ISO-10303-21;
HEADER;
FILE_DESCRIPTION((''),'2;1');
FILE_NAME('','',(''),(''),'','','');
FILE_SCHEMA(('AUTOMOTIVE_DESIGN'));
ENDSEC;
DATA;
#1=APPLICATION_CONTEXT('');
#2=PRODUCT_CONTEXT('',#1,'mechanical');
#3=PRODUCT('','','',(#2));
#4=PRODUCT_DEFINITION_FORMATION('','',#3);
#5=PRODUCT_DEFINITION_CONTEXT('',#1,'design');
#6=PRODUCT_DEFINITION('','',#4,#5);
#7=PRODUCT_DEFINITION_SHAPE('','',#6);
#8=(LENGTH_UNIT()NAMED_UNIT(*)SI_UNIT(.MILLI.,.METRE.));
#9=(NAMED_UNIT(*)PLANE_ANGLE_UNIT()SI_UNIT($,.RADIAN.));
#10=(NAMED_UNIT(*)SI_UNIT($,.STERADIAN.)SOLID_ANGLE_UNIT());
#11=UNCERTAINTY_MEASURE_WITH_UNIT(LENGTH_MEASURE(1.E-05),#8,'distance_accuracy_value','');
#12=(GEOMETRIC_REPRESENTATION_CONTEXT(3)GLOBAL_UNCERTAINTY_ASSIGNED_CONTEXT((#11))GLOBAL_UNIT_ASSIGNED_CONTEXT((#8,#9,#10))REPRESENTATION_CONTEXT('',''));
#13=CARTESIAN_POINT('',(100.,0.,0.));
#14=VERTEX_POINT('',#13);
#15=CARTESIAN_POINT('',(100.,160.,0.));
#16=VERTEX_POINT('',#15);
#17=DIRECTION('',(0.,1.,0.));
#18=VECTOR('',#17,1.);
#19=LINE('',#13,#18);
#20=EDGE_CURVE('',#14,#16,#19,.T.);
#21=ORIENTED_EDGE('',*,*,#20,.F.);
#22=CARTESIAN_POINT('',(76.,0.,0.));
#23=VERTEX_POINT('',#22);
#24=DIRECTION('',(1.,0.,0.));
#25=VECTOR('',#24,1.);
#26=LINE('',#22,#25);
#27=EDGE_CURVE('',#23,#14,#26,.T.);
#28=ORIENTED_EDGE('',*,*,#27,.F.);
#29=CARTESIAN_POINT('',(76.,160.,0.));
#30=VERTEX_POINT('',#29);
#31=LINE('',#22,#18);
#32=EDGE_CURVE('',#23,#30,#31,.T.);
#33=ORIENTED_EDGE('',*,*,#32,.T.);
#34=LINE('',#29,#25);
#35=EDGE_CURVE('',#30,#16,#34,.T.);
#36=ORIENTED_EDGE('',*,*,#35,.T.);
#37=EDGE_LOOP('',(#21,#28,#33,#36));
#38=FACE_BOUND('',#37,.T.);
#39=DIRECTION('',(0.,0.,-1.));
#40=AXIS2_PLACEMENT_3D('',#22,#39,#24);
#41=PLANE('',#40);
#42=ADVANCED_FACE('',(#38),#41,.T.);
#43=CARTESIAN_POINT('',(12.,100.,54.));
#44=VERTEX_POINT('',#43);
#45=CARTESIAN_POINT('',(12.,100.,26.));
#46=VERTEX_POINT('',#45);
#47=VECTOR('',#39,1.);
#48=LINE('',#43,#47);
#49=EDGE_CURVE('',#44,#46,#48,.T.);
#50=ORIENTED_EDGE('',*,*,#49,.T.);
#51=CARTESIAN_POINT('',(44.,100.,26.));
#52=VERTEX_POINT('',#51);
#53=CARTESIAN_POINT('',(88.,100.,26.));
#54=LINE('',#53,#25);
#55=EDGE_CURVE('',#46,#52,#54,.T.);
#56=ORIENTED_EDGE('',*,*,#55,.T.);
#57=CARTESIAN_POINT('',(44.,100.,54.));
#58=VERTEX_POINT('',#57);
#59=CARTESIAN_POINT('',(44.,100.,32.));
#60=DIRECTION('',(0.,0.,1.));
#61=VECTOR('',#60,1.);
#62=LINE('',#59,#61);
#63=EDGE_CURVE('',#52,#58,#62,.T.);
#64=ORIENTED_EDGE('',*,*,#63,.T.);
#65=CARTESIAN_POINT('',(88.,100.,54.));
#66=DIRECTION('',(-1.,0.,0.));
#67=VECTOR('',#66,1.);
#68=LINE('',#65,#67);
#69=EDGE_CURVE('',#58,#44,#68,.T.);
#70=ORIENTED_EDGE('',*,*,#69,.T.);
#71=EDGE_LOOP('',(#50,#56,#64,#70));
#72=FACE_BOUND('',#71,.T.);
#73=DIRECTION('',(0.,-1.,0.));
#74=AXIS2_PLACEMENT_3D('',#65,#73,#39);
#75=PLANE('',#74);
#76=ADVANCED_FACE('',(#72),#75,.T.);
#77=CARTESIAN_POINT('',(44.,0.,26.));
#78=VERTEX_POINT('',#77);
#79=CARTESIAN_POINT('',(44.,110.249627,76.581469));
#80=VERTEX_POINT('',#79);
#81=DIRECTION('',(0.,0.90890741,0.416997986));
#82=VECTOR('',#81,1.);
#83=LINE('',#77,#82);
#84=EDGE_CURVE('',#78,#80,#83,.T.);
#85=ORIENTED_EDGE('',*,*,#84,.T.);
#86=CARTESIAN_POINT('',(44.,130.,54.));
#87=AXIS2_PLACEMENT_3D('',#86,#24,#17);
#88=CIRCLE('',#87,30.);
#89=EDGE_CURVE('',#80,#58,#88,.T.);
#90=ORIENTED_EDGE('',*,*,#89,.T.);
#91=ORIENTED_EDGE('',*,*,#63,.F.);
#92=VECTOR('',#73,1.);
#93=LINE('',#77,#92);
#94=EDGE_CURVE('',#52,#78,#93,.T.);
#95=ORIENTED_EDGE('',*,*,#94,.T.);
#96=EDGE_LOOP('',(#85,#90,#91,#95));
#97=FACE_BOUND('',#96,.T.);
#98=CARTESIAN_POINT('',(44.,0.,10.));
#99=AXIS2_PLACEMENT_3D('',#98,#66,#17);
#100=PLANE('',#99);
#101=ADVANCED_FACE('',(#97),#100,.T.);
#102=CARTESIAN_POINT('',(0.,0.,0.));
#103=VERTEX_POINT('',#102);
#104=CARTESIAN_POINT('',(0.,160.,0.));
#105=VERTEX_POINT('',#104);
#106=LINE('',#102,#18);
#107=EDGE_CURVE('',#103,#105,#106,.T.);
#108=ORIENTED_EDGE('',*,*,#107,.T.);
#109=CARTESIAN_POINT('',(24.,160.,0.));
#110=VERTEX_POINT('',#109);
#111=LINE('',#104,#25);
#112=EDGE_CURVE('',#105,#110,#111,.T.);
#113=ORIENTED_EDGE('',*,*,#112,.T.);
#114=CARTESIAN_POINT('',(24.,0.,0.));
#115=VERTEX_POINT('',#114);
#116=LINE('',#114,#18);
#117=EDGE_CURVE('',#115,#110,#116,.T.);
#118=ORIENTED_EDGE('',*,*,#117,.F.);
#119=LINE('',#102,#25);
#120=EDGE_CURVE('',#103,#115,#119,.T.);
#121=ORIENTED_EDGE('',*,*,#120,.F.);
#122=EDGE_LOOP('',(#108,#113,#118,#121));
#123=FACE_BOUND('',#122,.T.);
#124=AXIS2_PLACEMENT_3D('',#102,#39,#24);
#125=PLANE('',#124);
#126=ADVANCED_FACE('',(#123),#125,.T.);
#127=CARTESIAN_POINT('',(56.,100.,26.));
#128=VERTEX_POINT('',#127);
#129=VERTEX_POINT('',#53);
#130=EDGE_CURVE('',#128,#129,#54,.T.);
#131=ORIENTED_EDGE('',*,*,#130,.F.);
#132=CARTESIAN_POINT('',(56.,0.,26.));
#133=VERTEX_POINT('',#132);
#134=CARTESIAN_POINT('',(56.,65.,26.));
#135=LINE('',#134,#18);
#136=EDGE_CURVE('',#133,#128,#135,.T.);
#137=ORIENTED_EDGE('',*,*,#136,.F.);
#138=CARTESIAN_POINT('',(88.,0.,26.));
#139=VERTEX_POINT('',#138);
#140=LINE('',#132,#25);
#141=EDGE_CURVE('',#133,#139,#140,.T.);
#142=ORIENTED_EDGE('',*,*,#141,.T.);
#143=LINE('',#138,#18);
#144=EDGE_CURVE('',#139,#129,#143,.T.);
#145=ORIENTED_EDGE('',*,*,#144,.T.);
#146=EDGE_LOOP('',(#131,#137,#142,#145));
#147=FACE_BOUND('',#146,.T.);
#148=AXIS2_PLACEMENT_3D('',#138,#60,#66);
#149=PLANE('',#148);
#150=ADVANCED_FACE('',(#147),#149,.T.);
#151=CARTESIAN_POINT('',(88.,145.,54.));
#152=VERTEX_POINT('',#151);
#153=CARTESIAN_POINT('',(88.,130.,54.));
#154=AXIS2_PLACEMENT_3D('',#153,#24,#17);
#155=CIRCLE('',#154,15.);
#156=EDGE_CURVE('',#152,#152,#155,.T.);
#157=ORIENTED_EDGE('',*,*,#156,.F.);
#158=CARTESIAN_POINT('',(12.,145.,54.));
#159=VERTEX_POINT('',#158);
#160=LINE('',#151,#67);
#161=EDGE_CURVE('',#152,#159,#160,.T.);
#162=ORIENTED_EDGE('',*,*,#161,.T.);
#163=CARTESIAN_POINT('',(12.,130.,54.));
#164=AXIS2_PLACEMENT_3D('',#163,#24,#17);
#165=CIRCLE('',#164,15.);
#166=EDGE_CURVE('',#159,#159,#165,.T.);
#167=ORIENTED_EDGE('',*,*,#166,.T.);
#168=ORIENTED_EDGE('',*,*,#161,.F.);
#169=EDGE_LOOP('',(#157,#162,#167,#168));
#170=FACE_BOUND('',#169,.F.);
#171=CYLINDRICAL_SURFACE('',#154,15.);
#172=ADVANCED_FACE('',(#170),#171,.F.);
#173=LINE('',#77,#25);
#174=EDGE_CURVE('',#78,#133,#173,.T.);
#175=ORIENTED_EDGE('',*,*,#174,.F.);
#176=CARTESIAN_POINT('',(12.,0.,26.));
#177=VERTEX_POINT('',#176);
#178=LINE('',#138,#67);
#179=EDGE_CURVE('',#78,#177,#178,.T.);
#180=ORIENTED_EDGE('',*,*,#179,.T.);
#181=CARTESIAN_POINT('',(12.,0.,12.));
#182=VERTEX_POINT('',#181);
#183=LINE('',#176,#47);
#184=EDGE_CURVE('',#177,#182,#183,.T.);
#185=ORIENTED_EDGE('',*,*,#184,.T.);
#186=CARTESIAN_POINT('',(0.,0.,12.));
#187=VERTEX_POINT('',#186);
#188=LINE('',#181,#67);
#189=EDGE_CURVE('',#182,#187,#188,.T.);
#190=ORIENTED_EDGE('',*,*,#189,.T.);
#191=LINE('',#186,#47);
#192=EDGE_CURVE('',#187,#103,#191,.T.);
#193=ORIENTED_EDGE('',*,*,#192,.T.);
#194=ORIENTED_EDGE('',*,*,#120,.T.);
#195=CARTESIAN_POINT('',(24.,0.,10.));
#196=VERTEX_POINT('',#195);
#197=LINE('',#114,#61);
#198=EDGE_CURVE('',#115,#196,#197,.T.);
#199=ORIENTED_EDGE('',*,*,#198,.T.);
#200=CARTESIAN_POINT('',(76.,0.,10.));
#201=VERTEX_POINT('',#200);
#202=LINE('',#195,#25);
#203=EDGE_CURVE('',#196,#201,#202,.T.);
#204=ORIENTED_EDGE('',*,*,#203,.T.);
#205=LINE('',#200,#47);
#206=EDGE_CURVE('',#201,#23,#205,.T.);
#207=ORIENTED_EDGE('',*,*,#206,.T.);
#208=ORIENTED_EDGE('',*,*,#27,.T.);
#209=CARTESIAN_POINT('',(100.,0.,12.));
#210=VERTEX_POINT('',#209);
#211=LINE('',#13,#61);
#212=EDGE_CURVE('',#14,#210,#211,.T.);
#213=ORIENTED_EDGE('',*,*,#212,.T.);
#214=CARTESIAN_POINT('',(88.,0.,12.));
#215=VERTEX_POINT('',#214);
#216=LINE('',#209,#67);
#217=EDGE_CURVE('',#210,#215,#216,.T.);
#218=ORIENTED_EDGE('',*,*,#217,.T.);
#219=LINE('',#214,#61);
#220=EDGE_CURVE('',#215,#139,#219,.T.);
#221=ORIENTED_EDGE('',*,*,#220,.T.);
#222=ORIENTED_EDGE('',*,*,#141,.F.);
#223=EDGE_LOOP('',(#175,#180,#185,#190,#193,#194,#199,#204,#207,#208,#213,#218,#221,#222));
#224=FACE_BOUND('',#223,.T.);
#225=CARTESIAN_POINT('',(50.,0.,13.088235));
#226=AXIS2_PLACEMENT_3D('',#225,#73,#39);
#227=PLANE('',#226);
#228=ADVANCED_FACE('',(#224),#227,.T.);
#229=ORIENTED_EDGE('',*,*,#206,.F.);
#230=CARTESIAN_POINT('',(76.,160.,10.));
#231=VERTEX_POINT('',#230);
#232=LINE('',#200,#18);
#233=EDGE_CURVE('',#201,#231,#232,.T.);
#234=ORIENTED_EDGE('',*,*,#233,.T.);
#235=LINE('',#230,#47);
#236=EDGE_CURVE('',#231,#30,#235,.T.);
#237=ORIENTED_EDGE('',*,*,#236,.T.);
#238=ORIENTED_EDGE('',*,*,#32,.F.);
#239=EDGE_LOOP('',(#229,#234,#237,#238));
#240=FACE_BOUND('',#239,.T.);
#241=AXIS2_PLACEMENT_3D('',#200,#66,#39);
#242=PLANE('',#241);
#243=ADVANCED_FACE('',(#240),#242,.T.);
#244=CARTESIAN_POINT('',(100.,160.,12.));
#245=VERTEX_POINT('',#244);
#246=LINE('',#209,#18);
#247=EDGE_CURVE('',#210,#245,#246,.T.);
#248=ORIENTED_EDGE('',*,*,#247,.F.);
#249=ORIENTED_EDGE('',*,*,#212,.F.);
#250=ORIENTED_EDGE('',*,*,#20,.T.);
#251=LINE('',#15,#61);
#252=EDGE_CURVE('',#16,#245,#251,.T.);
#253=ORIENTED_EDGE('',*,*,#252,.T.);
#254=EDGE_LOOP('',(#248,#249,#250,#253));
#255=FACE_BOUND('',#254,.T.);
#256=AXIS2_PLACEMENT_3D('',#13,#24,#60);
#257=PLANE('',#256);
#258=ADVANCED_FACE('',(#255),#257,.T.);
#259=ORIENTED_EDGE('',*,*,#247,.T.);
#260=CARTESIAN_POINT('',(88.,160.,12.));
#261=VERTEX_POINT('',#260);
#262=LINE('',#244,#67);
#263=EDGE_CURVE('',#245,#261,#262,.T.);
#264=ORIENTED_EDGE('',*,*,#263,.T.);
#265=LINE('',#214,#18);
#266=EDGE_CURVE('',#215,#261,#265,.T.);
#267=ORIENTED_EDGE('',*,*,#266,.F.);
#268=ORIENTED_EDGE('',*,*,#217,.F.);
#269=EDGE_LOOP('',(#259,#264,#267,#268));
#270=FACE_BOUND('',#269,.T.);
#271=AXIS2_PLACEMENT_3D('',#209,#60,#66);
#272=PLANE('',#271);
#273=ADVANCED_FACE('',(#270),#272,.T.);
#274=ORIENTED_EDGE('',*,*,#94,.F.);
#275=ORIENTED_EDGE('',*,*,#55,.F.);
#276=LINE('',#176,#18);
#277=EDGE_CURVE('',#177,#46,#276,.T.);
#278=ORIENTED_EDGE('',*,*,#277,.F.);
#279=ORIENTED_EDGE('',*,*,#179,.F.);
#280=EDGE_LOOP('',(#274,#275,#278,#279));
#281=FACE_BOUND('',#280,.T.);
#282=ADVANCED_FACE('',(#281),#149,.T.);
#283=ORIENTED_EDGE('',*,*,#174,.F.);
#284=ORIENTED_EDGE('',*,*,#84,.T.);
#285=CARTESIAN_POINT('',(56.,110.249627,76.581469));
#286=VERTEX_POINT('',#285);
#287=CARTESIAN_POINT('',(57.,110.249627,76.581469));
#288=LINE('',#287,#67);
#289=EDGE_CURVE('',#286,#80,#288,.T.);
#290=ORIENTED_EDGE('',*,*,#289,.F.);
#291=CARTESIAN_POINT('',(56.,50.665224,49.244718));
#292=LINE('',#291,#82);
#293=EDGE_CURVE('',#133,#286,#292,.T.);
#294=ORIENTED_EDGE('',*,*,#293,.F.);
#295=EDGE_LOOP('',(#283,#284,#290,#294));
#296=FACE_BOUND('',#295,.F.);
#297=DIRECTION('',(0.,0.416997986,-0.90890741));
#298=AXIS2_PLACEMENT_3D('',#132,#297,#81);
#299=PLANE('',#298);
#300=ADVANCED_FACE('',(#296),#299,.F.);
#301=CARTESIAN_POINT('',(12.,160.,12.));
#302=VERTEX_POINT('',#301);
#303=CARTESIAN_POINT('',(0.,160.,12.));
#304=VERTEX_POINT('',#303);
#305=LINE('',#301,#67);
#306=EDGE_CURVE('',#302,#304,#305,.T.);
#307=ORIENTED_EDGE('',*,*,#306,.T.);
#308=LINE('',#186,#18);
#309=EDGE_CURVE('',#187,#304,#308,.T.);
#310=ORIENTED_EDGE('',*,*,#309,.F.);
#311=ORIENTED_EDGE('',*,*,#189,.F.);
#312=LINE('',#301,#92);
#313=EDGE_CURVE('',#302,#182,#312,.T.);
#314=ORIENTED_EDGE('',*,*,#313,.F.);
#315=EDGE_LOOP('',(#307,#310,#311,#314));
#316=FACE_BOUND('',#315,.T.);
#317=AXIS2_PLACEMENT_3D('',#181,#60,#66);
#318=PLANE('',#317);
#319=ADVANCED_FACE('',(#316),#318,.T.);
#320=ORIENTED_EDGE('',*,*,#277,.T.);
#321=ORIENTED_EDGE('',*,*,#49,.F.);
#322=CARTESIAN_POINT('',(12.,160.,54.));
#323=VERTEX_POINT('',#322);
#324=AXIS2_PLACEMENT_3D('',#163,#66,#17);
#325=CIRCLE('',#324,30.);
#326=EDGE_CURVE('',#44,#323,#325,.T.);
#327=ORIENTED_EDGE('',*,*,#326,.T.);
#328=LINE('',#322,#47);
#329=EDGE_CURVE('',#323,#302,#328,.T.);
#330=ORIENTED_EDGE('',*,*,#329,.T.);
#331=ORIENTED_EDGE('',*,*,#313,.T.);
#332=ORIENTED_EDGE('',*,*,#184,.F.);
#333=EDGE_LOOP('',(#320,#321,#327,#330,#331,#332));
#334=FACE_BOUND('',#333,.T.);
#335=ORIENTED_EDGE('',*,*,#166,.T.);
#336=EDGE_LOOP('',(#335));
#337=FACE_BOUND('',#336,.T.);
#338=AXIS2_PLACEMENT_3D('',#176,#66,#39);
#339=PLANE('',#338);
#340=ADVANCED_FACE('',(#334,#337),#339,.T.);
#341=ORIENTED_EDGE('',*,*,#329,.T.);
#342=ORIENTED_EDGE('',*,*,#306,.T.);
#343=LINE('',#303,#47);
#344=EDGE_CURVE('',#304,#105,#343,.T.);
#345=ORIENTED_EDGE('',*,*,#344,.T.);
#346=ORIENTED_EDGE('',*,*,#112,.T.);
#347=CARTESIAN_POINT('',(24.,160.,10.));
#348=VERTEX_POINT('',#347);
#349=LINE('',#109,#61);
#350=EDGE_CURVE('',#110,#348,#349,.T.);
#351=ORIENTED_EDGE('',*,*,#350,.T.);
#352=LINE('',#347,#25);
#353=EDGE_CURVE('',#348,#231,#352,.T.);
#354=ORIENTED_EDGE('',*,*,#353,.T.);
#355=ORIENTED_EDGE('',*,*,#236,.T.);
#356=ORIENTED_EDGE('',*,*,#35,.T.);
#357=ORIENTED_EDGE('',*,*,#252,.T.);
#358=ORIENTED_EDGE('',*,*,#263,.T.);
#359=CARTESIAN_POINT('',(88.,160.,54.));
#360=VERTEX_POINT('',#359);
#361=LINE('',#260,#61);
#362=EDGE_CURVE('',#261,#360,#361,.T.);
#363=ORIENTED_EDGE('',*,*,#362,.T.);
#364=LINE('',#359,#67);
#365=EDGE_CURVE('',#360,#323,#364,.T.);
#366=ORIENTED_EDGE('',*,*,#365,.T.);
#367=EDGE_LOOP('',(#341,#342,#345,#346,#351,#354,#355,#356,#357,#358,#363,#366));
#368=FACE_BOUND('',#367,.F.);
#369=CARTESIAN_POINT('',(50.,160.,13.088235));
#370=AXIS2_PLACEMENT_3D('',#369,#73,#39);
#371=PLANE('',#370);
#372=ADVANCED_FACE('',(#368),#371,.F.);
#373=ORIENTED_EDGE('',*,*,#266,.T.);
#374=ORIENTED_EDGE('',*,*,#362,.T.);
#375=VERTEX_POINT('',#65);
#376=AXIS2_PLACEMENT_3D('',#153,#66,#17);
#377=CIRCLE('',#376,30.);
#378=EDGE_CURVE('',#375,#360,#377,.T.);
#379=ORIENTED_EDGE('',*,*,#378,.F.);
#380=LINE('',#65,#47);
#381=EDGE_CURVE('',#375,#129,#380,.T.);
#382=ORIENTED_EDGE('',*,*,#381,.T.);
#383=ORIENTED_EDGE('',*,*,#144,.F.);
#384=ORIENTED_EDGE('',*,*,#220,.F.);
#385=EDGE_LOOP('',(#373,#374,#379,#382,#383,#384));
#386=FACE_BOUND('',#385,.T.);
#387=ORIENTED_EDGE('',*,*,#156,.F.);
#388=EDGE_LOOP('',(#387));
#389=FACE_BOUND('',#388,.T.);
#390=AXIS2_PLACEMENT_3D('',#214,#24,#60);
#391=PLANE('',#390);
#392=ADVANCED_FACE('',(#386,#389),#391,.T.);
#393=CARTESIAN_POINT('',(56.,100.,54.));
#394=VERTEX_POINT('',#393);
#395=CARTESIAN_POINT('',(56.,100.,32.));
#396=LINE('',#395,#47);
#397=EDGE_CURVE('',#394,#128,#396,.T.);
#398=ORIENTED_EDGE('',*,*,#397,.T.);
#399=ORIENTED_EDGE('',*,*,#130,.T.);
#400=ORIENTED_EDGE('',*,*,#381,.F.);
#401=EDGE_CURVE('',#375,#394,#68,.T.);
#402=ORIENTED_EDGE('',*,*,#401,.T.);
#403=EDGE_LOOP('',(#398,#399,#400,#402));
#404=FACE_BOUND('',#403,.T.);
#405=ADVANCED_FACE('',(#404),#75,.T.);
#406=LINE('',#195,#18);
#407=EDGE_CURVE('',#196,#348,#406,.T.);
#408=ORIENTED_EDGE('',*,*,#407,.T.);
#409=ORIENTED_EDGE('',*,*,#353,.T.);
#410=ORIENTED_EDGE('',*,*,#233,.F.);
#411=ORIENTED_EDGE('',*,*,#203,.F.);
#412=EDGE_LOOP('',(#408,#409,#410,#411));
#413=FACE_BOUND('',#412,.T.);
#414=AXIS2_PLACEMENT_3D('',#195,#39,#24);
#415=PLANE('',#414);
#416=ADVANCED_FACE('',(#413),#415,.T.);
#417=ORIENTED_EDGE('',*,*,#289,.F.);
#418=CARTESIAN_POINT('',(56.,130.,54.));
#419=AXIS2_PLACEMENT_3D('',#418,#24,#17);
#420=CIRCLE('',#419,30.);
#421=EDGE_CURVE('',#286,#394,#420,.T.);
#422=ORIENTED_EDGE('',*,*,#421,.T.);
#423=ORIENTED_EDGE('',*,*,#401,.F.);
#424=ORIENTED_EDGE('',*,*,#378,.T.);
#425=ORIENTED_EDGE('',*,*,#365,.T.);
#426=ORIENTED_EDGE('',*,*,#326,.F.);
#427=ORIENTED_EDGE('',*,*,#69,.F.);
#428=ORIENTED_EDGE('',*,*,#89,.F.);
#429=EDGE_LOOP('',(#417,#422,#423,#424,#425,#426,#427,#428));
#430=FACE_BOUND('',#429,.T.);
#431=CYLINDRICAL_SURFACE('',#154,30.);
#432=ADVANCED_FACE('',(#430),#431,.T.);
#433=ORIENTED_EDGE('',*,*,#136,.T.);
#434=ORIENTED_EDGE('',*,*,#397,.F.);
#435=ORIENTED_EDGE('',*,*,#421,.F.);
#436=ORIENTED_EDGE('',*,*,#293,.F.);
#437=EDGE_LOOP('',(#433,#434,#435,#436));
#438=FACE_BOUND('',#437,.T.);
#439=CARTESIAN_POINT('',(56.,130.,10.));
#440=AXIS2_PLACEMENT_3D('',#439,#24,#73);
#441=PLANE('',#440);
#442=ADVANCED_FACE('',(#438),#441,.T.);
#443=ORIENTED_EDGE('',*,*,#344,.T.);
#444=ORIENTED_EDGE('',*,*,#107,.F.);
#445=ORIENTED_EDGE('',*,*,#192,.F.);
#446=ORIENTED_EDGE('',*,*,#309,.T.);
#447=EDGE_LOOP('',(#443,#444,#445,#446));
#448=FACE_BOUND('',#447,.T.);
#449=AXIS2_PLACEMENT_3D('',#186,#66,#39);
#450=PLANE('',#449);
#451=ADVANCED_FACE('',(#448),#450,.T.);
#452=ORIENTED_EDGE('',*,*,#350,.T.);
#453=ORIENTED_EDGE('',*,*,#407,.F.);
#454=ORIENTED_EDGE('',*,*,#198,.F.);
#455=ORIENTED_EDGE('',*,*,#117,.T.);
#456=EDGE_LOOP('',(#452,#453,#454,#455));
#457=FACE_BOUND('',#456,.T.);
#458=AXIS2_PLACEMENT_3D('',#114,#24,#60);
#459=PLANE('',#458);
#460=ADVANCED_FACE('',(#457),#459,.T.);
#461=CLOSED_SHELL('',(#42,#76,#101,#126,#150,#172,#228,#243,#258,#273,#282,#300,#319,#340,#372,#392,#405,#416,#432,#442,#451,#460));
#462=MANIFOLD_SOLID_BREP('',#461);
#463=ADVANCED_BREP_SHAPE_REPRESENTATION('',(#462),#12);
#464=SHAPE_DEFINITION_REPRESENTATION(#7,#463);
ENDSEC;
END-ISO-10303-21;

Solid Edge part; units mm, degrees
sketch "Sketch1" plane through (0, 0, 0) normal (0, -1, 0) x (1, 0, 0)
  line L0 (88, 26) -> (12, 26)
  line L1 (12, 26) -> (12, 12)
  line L2 (12, 12) -> (0, 12)
  line L3 (0, 12) -> (0, 0)
  line L4 (0, 0) -> (24, 0)
  line L5 (24, 0) -> (24, 10)
  line L6 (24, 10) -> (76, 10)
  line L7 (76, 10) -> (76, 0)
  line L8 (76, 0) -> (100, 0)
  line L9 (100, 0) -> (100, 12)
  line L10 (100, 12) -> (88, 12)
  line L11 (88, 12) -> (88, 26)
extrude "Protrusion1" add sketch "Sketch1" against normal blind 160
sketch "Sketch2" plane through (50, 80, 10) normal (0, 0, -1) x (1, 0, 0)
  line L0 (-6, 80) -> (-6, -50)
  line L1 (-6, -50) -> (6, -50)
  line L2 (6, -50) -> (6, 80)
  line L3 (6, 80) -> (-6, 80)
extrude "ExtrudedProtrusion_2" add sketch "Sketch2" against normal blind 72
sketch "Sketch3" plane through (88, 80, 19) normal (1, 0, 0) x (0, 1, 0)
  line L0 (80, -7) -> (80, 35)
  line L1 (20, -7) -> (80, -7)
  line L2 (20, 35) -> (20, -7)
  arc A0 (20, 35) -> (80, 35) centre (50, 35) cw
  circle A1 centre (50, 35) radius 15
extrude "ExtrudedProtrusion_3" add sketch "Sketch3" against normal blind 76
sketch "Sketch4" plane through (56, 122.5, 54) normal (1, 0, 0) x (0, 0, 1)
  arc A0 (-15, -7.5) -> (15, -7.5) centre (0, -7.5) cw
  line L0 (15, -7.5) -> (-15, -7.5)
extrude "ExtrudedCutout_1" cut sketch "Sketch4" against normal blind 12 and the other way blind 1
sketch "Sketch5" plane through (56, 59.6148, 54) normal (1, 0, 0) x (0, 1, 0)
  line L0 (-59.6148, 28) -> (59.6148, 28)
  arc A0 (50.6348, 22.5815) -> (59.6148, 28) centre (70.3852, 0) cw
  line L1 (-59.6148, -28) -> (50.6348, 22.5815)
  line L2 (-59.6148, 28) -> (-59.6148, -28)
extrude "ExtrudedCutout_3" cut sketch "Sketch5" against normal blind 12 and the other way blind 1
